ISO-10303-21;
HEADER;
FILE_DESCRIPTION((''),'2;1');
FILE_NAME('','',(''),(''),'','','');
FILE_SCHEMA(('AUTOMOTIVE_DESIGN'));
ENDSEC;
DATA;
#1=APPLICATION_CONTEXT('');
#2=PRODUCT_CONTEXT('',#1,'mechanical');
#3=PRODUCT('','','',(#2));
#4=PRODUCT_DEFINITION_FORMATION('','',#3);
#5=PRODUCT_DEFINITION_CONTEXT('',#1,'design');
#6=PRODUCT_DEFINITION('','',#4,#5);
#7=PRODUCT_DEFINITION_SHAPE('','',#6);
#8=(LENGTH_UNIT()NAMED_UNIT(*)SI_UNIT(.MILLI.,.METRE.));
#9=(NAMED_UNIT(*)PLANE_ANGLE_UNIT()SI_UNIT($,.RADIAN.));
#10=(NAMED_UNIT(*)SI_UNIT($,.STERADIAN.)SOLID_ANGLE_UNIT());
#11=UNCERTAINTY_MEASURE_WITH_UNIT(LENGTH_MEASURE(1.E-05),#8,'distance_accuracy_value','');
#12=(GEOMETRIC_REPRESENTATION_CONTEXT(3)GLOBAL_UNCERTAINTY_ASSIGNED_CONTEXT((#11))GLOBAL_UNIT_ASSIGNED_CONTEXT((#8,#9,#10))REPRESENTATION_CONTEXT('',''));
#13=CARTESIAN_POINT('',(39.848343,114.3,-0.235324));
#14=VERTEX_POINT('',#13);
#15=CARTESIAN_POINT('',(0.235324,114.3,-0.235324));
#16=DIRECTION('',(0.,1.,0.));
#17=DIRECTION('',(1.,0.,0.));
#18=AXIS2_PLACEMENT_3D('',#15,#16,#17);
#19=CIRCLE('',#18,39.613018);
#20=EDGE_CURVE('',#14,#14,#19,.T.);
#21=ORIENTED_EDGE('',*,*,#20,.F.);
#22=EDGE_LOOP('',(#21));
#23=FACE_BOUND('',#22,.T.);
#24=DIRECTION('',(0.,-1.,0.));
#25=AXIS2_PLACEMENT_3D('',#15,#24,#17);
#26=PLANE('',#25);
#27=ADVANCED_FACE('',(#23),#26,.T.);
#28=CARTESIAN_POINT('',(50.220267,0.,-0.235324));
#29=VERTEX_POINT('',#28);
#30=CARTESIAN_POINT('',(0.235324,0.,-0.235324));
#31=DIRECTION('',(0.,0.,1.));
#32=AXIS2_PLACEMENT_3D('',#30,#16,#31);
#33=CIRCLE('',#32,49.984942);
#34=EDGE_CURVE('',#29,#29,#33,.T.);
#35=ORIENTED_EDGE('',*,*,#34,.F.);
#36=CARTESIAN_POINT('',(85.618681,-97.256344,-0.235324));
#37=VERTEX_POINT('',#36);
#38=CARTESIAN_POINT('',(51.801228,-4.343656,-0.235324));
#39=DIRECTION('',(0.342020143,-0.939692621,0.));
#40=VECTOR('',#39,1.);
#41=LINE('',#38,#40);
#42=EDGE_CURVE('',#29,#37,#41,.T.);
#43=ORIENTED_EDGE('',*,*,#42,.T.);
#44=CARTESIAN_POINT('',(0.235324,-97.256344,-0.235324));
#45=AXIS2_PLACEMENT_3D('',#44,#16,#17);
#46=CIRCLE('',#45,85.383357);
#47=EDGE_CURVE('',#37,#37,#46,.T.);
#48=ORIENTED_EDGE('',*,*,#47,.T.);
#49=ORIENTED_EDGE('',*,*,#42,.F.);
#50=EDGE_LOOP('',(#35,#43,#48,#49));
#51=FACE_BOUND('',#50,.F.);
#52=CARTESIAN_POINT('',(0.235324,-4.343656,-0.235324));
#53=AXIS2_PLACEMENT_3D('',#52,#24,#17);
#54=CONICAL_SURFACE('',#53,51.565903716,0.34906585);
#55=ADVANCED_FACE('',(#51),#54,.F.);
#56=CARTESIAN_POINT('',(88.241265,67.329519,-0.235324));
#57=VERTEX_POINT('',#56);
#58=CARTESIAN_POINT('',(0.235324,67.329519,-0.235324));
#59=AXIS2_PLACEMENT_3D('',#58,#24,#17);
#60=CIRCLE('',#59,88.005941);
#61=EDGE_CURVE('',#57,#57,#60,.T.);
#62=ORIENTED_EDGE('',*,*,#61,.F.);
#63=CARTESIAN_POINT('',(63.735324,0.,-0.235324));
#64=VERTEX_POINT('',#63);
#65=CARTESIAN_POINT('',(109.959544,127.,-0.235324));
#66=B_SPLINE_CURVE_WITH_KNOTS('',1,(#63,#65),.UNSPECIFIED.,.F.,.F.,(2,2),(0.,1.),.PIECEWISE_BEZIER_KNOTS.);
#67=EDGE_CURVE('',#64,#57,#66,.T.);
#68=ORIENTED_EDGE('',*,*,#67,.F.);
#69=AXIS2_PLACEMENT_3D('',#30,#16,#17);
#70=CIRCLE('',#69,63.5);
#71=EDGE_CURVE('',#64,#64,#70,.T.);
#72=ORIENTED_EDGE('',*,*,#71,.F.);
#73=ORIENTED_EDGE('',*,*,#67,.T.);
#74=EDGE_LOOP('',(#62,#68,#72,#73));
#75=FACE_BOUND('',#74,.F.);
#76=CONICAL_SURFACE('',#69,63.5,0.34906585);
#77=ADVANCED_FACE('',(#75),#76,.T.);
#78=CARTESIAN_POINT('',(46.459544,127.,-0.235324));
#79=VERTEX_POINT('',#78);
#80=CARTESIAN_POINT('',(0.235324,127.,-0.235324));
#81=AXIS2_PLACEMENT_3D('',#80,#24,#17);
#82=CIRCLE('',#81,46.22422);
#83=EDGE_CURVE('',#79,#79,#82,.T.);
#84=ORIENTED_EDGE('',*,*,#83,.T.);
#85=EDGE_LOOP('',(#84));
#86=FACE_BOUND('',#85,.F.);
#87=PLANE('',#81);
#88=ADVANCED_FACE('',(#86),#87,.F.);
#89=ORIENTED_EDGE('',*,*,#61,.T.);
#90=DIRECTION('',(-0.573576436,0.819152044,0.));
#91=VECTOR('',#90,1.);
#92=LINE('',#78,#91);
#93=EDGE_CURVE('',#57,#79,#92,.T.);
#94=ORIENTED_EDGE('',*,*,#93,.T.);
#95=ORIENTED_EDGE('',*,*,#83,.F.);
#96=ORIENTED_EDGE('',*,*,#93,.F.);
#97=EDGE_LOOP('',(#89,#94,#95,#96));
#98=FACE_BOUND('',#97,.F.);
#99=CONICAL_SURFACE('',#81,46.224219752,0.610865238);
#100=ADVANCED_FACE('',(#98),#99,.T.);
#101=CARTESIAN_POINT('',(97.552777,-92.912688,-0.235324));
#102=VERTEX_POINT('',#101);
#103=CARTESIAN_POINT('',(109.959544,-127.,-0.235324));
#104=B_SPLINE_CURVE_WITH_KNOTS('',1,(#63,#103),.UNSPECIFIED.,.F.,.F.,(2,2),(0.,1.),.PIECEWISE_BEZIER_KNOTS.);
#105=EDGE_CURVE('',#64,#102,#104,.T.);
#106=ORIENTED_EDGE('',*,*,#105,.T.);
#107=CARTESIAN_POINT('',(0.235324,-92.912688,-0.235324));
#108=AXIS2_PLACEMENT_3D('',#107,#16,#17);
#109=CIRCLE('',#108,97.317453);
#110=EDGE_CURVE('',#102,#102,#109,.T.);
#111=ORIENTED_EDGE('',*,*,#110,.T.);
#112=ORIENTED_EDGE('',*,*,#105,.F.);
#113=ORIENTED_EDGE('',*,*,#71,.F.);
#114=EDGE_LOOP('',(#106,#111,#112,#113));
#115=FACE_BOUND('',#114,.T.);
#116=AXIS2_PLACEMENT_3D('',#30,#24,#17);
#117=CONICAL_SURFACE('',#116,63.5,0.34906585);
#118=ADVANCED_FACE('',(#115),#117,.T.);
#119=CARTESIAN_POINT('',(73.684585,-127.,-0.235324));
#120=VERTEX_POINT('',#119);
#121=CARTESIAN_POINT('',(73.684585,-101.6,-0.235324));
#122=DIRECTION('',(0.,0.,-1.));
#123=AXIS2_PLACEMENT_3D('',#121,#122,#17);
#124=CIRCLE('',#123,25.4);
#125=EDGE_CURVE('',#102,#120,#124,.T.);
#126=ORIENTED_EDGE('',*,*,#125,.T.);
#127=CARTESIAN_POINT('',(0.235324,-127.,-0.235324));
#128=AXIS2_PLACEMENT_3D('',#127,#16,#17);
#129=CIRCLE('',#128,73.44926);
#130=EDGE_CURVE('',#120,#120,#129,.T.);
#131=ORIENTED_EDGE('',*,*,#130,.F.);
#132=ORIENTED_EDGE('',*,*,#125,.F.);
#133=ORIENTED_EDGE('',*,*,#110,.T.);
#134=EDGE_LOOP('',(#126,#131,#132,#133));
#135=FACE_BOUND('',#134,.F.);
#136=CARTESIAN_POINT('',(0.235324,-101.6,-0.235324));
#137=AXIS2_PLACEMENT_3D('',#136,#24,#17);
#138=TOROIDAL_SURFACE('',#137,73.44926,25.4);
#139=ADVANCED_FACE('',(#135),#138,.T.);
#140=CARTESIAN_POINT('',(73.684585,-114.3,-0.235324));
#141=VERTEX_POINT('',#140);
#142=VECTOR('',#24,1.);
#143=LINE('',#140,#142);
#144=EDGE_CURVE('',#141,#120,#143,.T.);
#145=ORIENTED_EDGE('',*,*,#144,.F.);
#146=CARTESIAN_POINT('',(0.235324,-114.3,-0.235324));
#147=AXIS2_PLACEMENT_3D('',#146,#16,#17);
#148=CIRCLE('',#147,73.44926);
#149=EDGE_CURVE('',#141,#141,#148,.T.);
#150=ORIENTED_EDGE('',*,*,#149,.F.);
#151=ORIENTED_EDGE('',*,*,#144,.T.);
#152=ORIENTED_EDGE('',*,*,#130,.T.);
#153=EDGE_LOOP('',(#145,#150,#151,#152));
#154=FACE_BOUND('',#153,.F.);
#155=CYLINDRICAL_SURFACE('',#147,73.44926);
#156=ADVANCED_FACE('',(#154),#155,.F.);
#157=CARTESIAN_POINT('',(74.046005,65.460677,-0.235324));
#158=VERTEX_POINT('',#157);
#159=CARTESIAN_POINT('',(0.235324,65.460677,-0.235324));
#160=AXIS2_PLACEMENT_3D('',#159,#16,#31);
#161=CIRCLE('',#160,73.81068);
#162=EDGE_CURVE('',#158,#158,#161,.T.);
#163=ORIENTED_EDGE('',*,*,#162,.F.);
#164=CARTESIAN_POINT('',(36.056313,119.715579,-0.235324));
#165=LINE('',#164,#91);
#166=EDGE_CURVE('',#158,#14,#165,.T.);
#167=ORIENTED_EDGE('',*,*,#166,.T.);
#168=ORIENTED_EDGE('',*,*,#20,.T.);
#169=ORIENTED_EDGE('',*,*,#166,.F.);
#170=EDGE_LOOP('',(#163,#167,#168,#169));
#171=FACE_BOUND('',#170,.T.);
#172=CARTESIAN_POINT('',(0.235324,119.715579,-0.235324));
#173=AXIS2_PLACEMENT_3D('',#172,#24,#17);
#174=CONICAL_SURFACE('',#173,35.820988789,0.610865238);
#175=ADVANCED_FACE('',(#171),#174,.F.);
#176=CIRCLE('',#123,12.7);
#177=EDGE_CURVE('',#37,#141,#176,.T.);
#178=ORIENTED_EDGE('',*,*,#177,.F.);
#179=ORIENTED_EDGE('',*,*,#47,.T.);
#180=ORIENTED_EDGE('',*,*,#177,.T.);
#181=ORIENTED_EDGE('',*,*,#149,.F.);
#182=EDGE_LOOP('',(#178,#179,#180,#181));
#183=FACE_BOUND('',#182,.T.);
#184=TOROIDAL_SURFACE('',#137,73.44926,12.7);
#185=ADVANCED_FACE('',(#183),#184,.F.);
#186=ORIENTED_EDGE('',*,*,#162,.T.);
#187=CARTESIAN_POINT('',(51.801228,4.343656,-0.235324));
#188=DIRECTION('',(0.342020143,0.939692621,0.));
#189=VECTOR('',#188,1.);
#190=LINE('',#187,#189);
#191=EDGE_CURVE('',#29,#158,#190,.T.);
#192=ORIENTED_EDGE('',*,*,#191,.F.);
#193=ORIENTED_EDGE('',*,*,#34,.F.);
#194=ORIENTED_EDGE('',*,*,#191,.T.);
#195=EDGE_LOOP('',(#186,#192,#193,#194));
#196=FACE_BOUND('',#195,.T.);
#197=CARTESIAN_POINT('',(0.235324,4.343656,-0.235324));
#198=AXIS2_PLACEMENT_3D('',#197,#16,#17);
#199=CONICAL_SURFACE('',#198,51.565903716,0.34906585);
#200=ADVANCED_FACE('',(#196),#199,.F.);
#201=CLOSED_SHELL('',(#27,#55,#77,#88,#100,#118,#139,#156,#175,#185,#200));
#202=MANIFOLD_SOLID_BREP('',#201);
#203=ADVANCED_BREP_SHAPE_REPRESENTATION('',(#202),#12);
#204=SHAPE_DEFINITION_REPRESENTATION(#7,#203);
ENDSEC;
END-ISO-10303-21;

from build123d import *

# Parameters (mm, degrees)
F0_R     = 63.5
F1_DEPTH = 127
F1_TAPER = -20
F2_R     = 25.4
F3_SIZE  = 63.5
F4_T     = -12.7


# Not quite as in the source:
# - a shell that OpenCascade refuses in one call is made with other operations: the cavity is built on its own and cut out


with BuildPart() as f1:
    # F0 (on Front) → F1 (new body, symmetric)
    with BuildSketch(Plane.XZ):
        with Locations((0.2353243763, -0.2353235031)):
            Circle(F0_R)
    extrude(amount=F1_DEPTH, both=True, taper=F1_TAPER)

    # F2
    f2_edges = [f1.edges().sort_by_distance(p)[0] for p in [
        (-109.488895, -127, -0.235324),
    ]]
    fillet(f2_edges, radius=F2_R)

    # F3
    f3_edges = [f1.edges().sort_by_distance(p)[0] for p in [
        (-109.488895, 127, -0.235324),
    ]]
    chamfer(f3_edges, length=F3_SIZE)

    # F4: a shell. OpenCascade refuses it in one call, so the cavity is built on its own and cut out:
    # the body offset inwards by the wall thickness, plus a prism from it out through each open face.
    f4_core = offset(f1.part, amount=F4_T, kind=Kind.INTERSECTION, mode=Mode.PRIVATE)
    f4_exits = [f4_core.faces().sort_by_distance(p)[0] for p in [
        (0.235324, -114.3, -0.235324),
    ]]
    add(f4_core, mode=Mode.SUBTRACT)
    extrude(f4_exits, amount=-F4_T, mode=Mode.SUBTRACT)


solid = f1.part
